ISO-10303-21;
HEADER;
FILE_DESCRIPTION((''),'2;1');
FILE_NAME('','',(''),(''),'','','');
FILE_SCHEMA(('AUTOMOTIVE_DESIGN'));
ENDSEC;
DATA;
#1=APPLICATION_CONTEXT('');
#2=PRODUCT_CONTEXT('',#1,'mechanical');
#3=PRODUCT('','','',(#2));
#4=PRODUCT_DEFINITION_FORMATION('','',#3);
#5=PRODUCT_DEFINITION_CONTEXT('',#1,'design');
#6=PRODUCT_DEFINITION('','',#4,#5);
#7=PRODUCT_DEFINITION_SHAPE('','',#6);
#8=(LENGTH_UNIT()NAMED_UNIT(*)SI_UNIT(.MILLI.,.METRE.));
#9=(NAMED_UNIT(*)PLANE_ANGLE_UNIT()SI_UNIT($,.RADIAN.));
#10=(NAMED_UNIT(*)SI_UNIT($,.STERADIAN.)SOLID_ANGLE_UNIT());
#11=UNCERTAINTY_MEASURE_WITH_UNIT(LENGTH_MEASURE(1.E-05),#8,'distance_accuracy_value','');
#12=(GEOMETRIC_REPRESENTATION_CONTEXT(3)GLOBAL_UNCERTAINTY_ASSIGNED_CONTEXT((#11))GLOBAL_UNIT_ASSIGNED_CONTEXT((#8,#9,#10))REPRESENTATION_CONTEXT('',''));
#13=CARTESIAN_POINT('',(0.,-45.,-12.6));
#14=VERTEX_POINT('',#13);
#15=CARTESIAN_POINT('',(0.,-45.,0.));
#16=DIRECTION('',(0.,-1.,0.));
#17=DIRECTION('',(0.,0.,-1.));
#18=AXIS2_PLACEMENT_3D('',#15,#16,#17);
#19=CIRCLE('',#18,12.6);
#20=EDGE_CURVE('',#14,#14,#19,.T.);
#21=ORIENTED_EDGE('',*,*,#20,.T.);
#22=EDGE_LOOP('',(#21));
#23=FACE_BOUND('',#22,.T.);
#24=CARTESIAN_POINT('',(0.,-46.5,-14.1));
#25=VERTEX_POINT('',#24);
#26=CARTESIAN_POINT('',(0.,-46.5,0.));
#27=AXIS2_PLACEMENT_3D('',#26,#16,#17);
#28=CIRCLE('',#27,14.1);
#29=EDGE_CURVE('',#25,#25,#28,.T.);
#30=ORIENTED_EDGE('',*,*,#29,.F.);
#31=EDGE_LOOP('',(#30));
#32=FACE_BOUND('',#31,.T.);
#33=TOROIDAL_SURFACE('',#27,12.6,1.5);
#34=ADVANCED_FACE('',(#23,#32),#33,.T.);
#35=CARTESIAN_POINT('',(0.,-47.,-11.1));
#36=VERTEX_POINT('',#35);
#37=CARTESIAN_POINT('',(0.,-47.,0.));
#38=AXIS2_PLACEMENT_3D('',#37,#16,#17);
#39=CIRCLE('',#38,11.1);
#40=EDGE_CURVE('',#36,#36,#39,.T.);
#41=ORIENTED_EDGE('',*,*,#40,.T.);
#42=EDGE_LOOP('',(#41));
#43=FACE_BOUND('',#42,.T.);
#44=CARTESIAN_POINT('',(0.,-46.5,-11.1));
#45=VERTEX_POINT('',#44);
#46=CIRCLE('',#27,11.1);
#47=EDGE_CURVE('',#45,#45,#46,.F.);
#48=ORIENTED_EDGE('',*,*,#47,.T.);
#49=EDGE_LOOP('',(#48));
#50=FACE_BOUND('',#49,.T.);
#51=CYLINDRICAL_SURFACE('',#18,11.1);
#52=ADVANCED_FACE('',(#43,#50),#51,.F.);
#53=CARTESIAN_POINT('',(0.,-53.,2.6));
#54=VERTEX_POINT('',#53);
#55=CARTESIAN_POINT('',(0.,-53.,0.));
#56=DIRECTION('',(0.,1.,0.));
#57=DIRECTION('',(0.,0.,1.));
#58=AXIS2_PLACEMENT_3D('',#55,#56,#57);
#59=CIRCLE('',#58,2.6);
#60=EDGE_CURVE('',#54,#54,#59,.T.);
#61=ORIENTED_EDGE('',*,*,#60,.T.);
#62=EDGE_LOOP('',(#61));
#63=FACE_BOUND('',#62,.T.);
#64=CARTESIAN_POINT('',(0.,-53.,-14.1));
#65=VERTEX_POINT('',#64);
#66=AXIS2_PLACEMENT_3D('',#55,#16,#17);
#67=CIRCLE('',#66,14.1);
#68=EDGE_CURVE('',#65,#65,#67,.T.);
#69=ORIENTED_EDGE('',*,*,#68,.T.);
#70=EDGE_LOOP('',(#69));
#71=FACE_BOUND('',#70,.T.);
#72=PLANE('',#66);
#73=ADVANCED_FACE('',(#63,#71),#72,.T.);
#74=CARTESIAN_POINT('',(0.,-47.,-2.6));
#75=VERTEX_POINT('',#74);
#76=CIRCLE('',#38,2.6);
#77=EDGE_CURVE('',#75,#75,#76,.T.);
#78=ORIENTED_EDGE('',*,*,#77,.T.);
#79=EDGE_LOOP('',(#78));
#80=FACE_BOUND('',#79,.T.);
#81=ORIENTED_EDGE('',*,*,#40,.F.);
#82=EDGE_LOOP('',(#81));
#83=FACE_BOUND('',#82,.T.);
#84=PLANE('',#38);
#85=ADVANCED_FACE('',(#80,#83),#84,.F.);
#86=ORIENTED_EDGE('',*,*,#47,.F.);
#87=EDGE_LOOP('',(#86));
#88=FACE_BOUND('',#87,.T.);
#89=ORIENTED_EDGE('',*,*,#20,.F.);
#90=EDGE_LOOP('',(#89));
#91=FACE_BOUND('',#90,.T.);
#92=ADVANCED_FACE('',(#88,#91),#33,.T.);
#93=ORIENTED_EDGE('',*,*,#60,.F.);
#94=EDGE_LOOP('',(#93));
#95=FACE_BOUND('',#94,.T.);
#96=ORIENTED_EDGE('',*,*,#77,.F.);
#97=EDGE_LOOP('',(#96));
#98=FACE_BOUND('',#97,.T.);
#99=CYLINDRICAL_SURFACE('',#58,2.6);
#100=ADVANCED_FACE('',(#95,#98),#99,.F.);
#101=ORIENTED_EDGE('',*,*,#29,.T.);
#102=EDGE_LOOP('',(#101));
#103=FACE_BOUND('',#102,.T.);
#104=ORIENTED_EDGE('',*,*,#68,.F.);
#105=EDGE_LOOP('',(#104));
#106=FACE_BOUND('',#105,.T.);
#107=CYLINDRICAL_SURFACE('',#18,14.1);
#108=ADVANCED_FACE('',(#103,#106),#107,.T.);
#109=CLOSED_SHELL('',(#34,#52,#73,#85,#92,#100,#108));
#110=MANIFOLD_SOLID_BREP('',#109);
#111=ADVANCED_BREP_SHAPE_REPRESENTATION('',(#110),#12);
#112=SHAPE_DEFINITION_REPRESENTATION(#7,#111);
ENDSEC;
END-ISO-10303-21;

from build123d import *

# Parameters (mm, degrees)
SKETCH1_R               = 11.1
SKETCH1_R_2             = 8.1
BOSS_EXTRUDE1_DEPTH     = 50
SKETCH3_W               = 203.170281232
SKETCH3_H               = 205.602397066
CUT_EXTRUDE1_DEPTH      = 53.406297332
SKETCH4_R               = 11.1
BOSS_EXTRUDE3_DEPTH     = 3
CUT_EXTRUDE2_DEPTH      = 99.261996723
CUT_EXTRUDE2_DEPTH_BACK = 99.261996723
SKETCH5_R               = 2.6
SKETCH6_W               = 15
SKETCH6_H               = 30
BOSS_EXTRUDE4_DEPTH     = 1.5
CUT_EXTRUDE3_DEPTH      = 60.691875494
CUT_EXTRUDE3_DEPTH_BACK = 60.691875494
SKETCH7_W               = 115.313009773
SKETCH7_H               = 104.745429411
BOSS_EXTRUDE5_START     = -8
SKETCH8_R               = 14.1
SKETCH8_R_2             = 11.1
BOSS_EXTRUDE5_DEPTH     = 8
FILLET3_R               = 1.5


with BuildPart() as part:
    # Sketch1 → Boss-Extrude1 (new, symmetric)
    with BuildSketch(Plane(origin=(0, 0, 0), x_dir=(1, 0, 0), z_dir=(0, 1, 0))):
        with Locations(Location((0, 0, 0), (0, 0, 270))):
            Circle(SKETCH1_R)
        with Locations(Location((0, 0, 0), (0, 0, 270))):
            Circle(SKETCH1_R_2, mode=Mode.SUBTRACT)
    extrude(amount=BOSS_EXTRUDE1_DEPTH, both=True)

    # Sketch3 → Cut-Extrude1 (cut, through all)
    with BuildSketch(Plane.XY):
        Rectangle(SKETCH3_W, SKETCH3_H)
    extrude(amount=CUT_EXTRUDE1_DEPTH, mode=Mode.SUBTRACT)

    # Sketch4 → Boss-Extrude3 (add, symmetric)
    with BuildSketch(Plane.XZ.offset(50)):
        with Locations(Location((0, 0, 0), (0, 0, 270))):
            Circle(SKETCH4_R)
    extrude(amount=BOSS_EXTRUDE3_DEPTH, both=True)

    # Sketch5 → Cut-Extrude2 (cut, two sides: drawn at the far end of the back side and taken through both)
    with BuildSketch(Plane(origin=(0, -47, 0), x_dir=(1, 0, 0), z_dir=(0, 1, 0)).offset(-CUT_EXTRUDE2_DEPTH_BACK)):
        with Locations(Location((0, 0, 0), (0, 0, 270))):
            Circle(SKETCH5_R)
    extrude(amount=CUT_EXTRUDE2_DEPTH + CUT_EXTRUDE2_DEPTH_BACK, mode=Mode.SUBTRACT)

    # Sketch6 → Boss-Extrude4 (add, symmetric)
    with BuildSketch(Plane.XY.offset(-6)):
        with Locations((15.1, 25)):
            Rectangle(SKETCH6_W, SKETCH6_H)
        with Locations((-15.1, 25)):
            Rectangle(SKETCH6_W, SKETCH6_H)
    extrude(amount=BOSS_EXTRUDE4_DEPTH, both=True)

    # Sketch7 → Cut-Extrude3 (cut, two sides: drawn at the far end of the back side and taken through both)
    with BuildSketch(Plane.XY.offset(-4.5).offset(-CUT_EXTRUDE3_DEPTH_BACK)):
        with Locations((3.022672806, 5.372714706)):
            Rectangle(SKETCH7_W, SKETCH7_H)
    extrude(amount=CUT_EXTRUDE3_DEPTH + CUT_EXTRUDE3_DEPTH_BACK, mode=Mode.SUBTRACT)

    # Sketch8 → Boss-Extrude5 (add)
    with BuildSketch(Plane.XZ.offset(53).offset(BOSS_EXTRUDE5_START)):
        with Locations(Location((0, 0, 0), (0, 0, 270))):
            Circle(SKETCH8_R)
        with Locations(Location((0, 0, 0), (0, 0, 270))):
            Circle(SKETCH8_R_2, mode=Mode.SUBTRACT)
    extrude(amount=BOSS_EXTRUDE5_DEPTH)

    # Fillet3
    fillet3_edges = [part.edges().sort_by_distance(p)[0] for p in [
        (0, -45, 14.1),
        (0, -45, 11.1),
    ]]
    fillet(fillet3_edges, radius=FILLET3_R - 0.0001)  # a hair under: the kernel refuses the full size


solid = part.part
